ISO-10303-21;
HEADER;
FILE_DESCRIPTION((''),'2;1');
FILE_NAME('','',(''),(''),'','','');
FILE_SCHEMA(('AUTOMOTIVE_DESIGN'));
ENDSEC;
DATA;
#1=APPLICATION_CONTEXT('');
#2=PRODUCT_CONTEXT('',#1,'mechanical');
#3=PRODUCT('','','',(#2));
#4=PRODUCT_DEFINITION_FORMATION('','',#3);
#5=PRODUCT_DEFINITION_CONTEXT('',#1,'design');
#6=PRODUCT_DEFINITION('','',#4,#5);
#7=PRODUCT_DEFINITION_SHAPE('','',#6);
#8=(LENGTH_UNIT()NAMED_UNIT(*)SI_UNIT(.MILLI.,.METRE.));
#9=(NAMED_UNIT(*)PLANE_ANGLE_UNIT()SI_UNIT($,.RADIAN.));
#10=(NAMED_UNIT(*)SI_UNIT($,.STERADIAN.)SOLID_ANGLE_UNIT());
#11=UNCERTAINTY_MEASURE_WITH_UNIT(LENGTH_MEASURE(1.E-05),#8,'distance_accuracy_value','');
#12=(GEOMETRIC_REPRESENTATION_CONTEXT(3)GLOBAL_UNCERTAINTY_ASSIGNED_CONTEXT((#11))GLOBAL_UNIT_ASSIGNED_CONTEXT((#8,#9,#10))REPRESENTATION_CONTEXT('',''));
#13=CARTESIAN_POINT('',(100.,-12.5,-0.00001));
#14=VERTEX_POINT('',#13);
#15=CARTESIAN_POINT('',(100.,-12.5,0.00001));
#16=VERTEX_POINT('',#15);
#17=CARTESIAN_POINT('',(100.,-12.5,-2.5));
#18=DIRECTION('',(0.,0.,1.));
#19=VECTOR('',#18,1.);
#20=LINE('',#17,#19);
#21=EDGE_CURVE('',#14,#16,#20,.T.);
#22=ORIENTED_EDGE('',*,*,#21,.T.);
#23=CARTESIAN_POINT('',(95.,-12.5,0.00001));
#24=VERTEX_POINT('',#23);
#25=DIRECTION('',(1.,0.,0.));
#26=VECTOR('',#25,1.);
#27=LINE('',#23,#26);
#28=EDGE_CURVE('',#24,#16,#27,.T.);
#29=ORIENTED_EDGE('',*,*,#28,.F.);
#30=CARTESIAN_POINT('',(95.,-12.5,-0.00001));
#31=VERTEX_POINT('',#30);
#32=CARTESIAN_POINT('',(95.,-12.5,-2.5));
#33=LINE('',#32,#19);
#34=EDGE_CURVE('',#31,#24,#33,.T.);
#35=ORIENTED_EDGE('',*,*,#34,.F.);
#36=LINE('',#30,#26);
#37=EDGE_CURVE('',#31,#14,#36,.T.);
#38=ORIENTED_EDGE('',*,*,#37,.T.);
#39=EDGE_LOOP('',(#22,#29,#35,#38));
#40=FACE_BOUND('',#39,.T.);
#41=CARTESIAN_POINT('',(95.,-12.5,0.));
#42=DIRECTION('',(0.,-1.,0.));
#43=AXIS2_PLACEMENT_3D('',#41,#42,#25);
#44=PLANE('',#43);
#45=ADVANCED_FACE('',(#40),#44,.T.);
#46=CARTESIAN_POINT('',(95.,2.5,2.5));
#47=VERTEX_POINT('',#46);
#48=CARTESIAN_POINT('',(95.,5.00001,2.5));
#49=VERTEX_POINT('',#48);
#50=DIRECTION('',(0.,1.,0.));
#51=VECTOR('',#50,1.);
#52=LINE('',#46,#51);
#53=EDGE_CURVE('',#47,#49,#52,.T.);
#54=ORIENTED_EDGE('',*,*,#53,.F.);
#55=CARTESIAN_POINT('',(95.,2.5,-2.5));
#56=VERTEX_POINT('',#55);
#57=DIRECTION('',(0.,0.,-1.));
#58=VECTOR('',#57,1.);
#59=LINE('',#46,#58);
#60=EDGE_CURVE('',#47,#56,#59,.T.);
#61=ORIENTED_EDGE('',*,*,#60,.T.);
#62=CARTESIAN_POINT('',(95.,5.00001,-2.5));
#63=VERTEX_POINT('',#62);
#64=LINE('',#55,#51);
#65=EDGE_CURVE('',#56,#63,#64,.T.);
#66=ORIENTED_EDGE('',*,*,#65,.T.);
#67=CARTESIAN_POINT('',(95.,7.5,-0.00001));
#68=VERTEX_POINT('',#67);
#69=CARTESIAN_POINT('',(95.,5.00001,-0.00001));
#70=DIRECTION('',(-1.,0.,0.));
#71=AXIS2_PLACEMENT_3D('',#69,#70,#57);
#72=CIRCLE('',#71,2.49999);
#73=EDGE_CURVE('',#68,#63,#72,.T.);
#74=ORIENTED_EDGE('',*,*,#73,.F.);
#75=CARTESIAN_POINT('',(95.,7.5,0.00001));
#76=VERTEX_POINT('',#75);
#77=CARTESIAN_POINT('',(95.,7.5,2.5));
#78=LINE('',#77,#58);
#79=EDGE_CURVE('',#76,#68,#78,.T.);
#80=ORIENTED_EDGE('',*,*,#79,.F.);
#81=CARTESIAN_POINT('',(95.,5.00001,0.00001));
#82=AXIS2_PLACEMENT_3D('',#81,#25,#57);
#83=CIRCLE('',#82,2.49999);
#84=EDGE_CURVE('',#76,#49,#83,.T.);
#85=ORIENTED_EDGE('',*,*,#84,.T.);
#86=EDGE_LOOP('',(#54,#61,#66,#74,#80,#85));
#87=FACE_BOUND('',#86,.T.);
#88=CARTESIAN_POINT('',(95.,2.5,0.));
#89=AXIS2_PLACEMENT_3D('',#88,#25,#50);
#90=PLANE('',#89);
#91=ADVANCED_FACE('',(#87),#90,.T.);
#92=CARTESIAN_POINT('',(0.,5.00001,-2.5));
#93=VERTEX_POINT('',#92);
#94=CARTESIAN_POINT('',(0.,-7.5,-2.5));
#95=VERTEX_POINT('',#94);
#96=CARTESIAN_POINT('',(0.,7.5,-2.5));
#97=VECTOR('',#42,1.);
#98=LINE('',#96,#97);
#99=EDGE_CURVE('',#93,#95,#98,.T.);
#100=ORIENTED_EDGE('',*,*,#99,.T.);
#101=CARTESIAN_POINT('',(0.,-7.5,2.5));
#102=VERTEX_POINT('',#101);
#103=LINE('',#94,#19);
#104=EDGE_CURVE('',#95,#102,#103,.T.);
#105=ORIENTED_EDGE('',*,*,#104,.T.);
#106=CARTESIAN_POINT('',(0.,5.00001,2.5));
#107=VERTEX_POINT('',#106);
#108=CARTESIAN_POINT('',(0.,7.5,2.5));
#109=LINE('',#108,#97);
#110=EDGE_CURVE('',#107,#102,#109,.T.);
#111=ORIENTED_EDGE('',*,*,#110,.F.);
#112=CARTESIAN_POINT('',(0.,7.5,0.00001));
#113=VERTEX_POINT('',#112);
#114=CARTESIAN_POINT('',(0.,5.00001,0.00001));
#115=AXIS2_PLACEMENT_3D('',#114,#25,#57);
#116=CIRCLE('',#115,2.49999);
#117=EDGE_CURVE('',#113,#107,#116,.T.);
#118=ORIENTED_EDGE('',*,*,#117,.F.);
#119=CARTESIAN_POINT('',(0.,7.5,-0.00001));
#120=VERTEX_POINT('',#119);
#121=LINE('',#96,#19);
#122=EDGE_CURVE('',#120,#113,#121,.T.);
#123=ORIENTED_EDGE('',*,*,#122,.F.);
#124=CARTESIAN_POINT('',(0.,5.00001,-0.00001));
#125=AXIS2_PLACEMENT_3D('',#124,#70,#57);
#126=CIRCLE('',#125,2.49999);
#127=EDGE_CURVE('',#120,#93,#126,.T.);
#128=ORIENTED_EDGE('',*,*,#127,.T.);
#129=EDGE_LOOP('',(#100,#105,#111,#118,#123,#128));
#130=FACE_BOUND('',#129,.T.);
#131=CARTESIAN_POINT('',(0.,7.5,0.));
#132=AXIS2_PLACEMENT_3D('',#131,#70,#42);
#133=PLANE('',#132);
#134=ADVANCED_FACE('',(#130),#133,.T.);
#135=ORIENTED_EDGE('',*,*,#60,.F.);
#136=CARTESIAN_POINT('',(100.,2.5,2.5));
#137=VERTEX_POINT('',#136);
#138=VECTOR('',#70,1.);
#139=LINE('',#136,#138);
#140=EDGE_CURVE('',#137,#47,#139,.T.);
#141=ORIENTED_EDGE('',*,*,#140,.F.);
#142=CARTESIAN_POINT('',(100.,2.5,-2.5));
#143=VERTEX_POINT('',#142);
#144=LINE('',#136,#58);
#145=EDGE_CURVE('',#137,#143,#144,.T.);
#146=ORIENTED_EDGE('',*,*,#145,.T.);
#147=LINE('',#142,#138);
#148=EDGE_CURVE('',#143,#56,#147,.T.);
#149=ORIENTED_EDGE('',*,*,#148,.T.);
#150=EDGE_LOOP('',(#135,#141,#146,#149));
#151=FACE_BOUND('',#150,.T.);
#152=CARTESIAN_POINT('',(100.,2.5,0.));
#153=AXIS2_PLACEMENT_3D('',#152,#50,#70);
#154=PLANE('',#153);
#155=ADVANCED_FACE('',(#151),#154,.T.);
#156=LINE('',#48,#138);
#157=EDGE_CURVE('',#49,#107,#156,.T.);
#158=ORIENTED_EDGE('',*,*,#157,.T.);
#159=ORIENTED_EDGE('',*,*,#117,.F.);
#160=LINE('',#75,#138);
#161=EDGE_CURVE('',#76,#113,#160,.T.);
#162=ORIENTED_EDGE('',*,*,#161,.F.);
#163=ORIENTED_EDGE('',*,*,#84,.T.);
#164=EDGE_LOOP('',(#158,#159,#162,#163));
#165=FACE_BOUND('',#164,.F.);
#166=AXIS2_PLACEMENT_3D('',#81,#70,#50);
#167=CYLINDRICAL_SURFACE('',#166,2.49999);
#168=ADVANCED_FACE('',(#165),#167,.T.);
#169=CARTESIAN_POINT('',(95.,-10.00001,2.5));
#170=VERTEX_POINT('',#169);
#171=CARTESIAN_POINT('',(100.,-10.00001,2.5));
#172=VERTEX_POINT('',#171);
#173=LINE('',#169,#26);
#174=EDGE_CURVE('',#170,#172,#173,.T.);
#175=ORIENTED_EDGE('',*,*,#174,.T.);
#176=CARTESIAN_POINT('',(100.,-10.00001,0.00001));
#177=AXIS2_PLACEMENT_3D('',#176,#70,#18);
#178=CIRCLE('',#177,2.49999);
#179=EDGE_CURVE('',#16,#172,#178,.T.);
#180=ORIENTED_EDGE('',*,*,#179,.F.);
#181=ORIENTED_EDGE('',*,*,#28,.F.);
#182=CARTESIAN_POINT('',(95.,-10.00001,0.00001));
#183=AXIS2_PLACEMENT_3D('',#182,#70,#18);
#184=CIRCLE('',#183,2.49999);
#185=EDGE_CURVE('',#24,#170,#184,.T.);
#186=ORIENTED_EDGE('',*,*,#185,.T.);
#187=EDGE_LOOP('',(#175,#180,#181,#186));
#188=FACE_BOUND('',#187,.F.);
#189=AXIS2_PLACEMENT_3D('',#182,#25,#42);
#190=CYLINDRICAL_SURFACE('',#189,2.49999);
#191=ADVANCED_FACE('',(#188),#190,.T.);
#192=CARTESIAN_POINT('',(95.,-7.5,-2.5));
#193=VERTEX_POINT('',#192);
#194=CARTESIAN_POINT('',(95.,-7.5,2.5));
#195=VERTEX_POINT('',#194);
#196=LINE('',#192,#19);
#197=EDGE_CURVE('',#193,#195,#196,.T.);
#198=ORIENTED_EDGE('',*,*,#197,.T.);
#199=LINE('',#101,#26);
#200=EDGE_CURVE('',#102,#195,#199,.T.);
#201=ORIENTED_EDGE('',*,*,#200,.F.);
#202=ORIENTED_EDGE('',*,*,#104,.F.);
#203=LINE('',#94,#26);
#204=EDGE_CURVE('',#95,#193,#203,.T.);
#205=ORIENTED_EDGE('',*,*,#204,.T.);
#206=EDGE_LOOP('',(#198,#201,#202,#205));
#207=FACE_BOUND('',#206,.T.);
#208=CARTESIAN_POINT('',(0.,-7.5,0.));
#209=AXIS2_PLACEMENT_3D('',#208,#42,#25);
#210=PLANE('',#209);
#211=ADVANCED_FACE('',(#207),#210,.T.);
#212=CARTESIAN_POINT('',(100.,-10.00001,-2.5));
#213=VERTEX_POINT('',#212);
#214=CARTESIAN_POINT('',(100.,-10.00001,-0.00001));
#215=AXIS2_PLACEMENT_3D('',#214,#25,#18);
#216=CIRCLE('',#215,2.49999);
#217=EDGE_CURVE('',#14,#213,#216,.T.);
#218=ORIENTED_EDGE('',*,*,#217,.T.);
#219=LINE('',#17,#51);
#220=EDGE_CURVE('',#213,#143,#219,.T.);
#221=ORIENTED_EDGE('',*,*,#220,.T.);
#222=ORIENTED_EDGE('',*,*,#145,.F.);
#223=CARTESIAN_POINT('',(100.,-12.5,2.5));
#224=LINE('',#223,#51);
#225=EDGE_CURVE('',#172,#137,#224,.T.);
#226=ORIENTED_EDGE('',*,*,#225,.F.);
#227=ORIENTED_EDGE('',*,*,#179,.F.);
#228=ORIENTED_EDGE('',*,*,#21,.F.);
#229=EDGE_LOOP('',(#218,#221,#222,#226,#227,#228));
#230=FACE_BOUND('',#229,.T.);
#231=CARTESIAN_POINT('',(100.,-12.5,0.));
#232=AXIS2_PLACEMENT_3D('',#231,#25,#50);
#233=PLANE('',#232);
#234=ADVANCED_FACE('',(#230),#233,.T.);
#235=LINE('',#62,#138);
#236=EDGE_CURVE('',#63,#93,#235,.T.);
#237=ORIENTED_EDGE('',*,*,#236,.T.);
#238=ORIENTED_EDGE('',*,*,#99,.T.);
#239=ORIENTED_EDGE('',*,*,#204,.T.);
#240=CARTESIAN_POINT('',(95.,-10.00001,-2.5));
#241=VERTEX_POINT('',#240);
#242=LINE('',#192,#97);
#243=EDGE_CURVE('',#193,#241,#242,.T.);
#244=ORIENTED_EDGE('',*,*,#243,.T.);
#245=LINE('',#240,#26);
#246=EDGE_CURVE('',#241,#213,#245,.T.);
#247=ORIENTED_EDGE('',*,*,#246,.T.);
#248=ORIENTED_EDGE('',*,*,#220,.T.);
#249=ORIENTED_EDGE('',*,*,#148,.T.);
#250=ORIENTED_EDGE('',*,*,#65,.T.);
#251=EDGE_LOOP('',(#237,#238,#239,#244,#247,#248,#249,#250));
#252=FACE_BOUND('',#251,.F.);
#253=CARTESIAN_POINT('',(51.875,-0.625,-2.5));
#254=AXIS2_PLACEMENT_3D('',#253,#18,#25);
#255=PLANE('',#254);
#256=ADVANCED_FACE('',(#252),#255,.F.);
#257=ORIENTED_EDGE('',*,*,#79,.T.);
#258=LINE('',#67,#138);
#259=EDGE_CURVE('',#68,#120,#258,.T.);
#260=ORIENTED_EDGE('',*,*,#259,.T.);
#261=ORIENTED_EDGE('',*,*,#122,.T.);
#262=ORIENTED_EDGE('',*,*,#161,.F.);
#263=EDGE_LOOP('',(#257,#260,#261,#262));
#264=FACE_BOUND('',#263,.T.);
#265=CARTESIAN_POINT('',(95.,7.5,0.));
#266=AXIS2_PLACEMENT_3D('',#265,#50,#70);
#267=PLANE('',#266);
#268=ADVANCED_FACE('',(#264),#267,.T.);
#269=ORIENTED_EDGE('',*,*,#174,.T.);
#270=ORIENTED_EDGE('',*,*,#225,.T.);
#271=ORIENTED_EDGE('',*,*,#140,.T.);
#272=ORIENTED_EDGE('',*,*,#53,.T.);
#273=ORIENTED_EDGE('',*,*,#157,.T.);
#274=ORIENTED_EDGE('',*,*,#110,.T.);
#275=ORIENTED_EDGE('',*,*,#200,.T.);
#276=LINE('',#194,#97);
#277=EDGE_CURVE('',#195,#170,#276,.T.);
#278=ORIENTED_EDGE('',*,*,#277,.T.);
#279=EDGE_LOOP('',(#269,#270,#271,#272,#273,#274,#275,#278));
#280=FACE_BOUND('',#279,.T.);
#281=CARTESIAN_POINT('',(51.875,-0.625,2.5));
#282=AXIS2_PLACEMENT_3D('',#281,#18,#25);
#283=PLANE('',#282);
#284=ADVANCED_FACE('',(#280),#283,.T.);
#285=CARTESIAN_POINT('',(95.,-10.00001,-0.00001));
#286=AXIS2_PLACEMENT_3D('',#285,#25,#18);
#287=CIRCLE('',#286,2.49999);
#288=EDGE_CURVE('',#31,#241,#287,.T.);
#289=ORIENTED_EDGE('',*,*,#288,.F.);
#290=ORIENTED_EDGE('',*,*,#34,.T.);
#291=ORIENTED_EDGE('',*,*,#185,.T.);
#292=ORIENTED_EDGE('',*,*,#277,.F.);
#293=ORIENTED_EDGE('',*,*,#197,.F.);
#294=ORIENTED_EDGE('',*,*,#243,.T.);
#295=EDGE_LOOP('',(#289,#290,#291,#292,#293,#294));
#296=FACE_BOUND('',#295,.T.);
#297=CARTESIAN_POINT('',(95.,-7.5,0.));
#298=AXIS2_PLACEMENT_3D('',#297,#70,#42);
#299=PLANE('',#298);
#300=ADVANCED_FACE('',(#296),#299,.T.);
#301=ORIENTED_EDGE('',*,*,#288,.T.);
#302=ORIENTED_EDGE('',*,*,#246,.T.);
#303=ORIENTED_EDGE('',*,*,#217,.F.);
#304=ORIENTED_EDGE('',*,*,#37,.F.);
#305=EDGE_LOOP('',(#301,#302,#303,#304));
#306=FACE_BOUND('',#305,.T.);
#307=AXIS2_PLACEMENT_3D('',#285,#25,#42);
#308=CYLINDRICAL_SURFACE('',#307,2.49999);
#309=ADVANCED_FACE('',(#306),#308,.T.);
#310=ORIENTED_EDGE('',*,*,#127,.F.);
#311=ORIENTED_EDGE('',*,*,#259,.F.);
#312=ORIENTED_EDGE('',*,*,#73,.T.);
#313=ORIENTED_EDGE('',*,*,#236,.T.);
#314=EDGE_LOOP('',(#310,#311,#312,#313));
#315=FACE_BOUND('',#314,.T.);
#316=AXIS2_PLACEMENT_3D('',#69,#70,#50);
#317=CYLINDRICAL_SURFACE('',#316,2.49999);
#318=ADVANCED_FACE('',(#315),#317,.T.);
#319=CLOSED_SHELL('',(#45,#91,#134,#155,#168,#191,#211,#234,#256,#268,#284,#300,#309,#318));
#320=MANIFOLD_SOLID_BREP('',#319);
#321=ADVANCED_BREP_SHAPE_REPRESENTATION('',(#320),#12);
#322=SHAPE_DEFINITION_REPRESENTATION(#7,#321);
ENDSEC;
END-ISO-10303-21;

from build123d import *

# Parameters (mm, degrees)
F1_DEPTH = 2.5
F2_R     = 2.49999


# Not quite as in the source:
# - a fillet or chamfer is up to 0.001 mm smaller than in the source, because OpenCascade refuses the exact size


with BuildPart() as f1:
    # F0 (on Top) → F1 (new body, symmetric)
    with BuildSketch(Plane.XY):
        Polygon((95, 7.5), (0, 7.5), (0, -7.5), (95, -7.5), (95, -12.5), (100, -12.5), (100, 2.5), (95, 2.5), align=None)
    extrude(amount=F1_DEPTH, both=True)

    # F2 (radius 2.5 in the source; OpenCascade refuses exactly that, so slightly less here)
    f2_edges = [f1.edges().sort_by_distance(p)[0] for p in [
        (97.5, -12.5, 2.5),
        (97.5, -12.5, -2.5),
        (47.5, 7.5, 2.5),
        (47.5, 7.5, -2.5),
    ]]
    fillet(f2_edges, radius=F2_R)


solid = f1.part
